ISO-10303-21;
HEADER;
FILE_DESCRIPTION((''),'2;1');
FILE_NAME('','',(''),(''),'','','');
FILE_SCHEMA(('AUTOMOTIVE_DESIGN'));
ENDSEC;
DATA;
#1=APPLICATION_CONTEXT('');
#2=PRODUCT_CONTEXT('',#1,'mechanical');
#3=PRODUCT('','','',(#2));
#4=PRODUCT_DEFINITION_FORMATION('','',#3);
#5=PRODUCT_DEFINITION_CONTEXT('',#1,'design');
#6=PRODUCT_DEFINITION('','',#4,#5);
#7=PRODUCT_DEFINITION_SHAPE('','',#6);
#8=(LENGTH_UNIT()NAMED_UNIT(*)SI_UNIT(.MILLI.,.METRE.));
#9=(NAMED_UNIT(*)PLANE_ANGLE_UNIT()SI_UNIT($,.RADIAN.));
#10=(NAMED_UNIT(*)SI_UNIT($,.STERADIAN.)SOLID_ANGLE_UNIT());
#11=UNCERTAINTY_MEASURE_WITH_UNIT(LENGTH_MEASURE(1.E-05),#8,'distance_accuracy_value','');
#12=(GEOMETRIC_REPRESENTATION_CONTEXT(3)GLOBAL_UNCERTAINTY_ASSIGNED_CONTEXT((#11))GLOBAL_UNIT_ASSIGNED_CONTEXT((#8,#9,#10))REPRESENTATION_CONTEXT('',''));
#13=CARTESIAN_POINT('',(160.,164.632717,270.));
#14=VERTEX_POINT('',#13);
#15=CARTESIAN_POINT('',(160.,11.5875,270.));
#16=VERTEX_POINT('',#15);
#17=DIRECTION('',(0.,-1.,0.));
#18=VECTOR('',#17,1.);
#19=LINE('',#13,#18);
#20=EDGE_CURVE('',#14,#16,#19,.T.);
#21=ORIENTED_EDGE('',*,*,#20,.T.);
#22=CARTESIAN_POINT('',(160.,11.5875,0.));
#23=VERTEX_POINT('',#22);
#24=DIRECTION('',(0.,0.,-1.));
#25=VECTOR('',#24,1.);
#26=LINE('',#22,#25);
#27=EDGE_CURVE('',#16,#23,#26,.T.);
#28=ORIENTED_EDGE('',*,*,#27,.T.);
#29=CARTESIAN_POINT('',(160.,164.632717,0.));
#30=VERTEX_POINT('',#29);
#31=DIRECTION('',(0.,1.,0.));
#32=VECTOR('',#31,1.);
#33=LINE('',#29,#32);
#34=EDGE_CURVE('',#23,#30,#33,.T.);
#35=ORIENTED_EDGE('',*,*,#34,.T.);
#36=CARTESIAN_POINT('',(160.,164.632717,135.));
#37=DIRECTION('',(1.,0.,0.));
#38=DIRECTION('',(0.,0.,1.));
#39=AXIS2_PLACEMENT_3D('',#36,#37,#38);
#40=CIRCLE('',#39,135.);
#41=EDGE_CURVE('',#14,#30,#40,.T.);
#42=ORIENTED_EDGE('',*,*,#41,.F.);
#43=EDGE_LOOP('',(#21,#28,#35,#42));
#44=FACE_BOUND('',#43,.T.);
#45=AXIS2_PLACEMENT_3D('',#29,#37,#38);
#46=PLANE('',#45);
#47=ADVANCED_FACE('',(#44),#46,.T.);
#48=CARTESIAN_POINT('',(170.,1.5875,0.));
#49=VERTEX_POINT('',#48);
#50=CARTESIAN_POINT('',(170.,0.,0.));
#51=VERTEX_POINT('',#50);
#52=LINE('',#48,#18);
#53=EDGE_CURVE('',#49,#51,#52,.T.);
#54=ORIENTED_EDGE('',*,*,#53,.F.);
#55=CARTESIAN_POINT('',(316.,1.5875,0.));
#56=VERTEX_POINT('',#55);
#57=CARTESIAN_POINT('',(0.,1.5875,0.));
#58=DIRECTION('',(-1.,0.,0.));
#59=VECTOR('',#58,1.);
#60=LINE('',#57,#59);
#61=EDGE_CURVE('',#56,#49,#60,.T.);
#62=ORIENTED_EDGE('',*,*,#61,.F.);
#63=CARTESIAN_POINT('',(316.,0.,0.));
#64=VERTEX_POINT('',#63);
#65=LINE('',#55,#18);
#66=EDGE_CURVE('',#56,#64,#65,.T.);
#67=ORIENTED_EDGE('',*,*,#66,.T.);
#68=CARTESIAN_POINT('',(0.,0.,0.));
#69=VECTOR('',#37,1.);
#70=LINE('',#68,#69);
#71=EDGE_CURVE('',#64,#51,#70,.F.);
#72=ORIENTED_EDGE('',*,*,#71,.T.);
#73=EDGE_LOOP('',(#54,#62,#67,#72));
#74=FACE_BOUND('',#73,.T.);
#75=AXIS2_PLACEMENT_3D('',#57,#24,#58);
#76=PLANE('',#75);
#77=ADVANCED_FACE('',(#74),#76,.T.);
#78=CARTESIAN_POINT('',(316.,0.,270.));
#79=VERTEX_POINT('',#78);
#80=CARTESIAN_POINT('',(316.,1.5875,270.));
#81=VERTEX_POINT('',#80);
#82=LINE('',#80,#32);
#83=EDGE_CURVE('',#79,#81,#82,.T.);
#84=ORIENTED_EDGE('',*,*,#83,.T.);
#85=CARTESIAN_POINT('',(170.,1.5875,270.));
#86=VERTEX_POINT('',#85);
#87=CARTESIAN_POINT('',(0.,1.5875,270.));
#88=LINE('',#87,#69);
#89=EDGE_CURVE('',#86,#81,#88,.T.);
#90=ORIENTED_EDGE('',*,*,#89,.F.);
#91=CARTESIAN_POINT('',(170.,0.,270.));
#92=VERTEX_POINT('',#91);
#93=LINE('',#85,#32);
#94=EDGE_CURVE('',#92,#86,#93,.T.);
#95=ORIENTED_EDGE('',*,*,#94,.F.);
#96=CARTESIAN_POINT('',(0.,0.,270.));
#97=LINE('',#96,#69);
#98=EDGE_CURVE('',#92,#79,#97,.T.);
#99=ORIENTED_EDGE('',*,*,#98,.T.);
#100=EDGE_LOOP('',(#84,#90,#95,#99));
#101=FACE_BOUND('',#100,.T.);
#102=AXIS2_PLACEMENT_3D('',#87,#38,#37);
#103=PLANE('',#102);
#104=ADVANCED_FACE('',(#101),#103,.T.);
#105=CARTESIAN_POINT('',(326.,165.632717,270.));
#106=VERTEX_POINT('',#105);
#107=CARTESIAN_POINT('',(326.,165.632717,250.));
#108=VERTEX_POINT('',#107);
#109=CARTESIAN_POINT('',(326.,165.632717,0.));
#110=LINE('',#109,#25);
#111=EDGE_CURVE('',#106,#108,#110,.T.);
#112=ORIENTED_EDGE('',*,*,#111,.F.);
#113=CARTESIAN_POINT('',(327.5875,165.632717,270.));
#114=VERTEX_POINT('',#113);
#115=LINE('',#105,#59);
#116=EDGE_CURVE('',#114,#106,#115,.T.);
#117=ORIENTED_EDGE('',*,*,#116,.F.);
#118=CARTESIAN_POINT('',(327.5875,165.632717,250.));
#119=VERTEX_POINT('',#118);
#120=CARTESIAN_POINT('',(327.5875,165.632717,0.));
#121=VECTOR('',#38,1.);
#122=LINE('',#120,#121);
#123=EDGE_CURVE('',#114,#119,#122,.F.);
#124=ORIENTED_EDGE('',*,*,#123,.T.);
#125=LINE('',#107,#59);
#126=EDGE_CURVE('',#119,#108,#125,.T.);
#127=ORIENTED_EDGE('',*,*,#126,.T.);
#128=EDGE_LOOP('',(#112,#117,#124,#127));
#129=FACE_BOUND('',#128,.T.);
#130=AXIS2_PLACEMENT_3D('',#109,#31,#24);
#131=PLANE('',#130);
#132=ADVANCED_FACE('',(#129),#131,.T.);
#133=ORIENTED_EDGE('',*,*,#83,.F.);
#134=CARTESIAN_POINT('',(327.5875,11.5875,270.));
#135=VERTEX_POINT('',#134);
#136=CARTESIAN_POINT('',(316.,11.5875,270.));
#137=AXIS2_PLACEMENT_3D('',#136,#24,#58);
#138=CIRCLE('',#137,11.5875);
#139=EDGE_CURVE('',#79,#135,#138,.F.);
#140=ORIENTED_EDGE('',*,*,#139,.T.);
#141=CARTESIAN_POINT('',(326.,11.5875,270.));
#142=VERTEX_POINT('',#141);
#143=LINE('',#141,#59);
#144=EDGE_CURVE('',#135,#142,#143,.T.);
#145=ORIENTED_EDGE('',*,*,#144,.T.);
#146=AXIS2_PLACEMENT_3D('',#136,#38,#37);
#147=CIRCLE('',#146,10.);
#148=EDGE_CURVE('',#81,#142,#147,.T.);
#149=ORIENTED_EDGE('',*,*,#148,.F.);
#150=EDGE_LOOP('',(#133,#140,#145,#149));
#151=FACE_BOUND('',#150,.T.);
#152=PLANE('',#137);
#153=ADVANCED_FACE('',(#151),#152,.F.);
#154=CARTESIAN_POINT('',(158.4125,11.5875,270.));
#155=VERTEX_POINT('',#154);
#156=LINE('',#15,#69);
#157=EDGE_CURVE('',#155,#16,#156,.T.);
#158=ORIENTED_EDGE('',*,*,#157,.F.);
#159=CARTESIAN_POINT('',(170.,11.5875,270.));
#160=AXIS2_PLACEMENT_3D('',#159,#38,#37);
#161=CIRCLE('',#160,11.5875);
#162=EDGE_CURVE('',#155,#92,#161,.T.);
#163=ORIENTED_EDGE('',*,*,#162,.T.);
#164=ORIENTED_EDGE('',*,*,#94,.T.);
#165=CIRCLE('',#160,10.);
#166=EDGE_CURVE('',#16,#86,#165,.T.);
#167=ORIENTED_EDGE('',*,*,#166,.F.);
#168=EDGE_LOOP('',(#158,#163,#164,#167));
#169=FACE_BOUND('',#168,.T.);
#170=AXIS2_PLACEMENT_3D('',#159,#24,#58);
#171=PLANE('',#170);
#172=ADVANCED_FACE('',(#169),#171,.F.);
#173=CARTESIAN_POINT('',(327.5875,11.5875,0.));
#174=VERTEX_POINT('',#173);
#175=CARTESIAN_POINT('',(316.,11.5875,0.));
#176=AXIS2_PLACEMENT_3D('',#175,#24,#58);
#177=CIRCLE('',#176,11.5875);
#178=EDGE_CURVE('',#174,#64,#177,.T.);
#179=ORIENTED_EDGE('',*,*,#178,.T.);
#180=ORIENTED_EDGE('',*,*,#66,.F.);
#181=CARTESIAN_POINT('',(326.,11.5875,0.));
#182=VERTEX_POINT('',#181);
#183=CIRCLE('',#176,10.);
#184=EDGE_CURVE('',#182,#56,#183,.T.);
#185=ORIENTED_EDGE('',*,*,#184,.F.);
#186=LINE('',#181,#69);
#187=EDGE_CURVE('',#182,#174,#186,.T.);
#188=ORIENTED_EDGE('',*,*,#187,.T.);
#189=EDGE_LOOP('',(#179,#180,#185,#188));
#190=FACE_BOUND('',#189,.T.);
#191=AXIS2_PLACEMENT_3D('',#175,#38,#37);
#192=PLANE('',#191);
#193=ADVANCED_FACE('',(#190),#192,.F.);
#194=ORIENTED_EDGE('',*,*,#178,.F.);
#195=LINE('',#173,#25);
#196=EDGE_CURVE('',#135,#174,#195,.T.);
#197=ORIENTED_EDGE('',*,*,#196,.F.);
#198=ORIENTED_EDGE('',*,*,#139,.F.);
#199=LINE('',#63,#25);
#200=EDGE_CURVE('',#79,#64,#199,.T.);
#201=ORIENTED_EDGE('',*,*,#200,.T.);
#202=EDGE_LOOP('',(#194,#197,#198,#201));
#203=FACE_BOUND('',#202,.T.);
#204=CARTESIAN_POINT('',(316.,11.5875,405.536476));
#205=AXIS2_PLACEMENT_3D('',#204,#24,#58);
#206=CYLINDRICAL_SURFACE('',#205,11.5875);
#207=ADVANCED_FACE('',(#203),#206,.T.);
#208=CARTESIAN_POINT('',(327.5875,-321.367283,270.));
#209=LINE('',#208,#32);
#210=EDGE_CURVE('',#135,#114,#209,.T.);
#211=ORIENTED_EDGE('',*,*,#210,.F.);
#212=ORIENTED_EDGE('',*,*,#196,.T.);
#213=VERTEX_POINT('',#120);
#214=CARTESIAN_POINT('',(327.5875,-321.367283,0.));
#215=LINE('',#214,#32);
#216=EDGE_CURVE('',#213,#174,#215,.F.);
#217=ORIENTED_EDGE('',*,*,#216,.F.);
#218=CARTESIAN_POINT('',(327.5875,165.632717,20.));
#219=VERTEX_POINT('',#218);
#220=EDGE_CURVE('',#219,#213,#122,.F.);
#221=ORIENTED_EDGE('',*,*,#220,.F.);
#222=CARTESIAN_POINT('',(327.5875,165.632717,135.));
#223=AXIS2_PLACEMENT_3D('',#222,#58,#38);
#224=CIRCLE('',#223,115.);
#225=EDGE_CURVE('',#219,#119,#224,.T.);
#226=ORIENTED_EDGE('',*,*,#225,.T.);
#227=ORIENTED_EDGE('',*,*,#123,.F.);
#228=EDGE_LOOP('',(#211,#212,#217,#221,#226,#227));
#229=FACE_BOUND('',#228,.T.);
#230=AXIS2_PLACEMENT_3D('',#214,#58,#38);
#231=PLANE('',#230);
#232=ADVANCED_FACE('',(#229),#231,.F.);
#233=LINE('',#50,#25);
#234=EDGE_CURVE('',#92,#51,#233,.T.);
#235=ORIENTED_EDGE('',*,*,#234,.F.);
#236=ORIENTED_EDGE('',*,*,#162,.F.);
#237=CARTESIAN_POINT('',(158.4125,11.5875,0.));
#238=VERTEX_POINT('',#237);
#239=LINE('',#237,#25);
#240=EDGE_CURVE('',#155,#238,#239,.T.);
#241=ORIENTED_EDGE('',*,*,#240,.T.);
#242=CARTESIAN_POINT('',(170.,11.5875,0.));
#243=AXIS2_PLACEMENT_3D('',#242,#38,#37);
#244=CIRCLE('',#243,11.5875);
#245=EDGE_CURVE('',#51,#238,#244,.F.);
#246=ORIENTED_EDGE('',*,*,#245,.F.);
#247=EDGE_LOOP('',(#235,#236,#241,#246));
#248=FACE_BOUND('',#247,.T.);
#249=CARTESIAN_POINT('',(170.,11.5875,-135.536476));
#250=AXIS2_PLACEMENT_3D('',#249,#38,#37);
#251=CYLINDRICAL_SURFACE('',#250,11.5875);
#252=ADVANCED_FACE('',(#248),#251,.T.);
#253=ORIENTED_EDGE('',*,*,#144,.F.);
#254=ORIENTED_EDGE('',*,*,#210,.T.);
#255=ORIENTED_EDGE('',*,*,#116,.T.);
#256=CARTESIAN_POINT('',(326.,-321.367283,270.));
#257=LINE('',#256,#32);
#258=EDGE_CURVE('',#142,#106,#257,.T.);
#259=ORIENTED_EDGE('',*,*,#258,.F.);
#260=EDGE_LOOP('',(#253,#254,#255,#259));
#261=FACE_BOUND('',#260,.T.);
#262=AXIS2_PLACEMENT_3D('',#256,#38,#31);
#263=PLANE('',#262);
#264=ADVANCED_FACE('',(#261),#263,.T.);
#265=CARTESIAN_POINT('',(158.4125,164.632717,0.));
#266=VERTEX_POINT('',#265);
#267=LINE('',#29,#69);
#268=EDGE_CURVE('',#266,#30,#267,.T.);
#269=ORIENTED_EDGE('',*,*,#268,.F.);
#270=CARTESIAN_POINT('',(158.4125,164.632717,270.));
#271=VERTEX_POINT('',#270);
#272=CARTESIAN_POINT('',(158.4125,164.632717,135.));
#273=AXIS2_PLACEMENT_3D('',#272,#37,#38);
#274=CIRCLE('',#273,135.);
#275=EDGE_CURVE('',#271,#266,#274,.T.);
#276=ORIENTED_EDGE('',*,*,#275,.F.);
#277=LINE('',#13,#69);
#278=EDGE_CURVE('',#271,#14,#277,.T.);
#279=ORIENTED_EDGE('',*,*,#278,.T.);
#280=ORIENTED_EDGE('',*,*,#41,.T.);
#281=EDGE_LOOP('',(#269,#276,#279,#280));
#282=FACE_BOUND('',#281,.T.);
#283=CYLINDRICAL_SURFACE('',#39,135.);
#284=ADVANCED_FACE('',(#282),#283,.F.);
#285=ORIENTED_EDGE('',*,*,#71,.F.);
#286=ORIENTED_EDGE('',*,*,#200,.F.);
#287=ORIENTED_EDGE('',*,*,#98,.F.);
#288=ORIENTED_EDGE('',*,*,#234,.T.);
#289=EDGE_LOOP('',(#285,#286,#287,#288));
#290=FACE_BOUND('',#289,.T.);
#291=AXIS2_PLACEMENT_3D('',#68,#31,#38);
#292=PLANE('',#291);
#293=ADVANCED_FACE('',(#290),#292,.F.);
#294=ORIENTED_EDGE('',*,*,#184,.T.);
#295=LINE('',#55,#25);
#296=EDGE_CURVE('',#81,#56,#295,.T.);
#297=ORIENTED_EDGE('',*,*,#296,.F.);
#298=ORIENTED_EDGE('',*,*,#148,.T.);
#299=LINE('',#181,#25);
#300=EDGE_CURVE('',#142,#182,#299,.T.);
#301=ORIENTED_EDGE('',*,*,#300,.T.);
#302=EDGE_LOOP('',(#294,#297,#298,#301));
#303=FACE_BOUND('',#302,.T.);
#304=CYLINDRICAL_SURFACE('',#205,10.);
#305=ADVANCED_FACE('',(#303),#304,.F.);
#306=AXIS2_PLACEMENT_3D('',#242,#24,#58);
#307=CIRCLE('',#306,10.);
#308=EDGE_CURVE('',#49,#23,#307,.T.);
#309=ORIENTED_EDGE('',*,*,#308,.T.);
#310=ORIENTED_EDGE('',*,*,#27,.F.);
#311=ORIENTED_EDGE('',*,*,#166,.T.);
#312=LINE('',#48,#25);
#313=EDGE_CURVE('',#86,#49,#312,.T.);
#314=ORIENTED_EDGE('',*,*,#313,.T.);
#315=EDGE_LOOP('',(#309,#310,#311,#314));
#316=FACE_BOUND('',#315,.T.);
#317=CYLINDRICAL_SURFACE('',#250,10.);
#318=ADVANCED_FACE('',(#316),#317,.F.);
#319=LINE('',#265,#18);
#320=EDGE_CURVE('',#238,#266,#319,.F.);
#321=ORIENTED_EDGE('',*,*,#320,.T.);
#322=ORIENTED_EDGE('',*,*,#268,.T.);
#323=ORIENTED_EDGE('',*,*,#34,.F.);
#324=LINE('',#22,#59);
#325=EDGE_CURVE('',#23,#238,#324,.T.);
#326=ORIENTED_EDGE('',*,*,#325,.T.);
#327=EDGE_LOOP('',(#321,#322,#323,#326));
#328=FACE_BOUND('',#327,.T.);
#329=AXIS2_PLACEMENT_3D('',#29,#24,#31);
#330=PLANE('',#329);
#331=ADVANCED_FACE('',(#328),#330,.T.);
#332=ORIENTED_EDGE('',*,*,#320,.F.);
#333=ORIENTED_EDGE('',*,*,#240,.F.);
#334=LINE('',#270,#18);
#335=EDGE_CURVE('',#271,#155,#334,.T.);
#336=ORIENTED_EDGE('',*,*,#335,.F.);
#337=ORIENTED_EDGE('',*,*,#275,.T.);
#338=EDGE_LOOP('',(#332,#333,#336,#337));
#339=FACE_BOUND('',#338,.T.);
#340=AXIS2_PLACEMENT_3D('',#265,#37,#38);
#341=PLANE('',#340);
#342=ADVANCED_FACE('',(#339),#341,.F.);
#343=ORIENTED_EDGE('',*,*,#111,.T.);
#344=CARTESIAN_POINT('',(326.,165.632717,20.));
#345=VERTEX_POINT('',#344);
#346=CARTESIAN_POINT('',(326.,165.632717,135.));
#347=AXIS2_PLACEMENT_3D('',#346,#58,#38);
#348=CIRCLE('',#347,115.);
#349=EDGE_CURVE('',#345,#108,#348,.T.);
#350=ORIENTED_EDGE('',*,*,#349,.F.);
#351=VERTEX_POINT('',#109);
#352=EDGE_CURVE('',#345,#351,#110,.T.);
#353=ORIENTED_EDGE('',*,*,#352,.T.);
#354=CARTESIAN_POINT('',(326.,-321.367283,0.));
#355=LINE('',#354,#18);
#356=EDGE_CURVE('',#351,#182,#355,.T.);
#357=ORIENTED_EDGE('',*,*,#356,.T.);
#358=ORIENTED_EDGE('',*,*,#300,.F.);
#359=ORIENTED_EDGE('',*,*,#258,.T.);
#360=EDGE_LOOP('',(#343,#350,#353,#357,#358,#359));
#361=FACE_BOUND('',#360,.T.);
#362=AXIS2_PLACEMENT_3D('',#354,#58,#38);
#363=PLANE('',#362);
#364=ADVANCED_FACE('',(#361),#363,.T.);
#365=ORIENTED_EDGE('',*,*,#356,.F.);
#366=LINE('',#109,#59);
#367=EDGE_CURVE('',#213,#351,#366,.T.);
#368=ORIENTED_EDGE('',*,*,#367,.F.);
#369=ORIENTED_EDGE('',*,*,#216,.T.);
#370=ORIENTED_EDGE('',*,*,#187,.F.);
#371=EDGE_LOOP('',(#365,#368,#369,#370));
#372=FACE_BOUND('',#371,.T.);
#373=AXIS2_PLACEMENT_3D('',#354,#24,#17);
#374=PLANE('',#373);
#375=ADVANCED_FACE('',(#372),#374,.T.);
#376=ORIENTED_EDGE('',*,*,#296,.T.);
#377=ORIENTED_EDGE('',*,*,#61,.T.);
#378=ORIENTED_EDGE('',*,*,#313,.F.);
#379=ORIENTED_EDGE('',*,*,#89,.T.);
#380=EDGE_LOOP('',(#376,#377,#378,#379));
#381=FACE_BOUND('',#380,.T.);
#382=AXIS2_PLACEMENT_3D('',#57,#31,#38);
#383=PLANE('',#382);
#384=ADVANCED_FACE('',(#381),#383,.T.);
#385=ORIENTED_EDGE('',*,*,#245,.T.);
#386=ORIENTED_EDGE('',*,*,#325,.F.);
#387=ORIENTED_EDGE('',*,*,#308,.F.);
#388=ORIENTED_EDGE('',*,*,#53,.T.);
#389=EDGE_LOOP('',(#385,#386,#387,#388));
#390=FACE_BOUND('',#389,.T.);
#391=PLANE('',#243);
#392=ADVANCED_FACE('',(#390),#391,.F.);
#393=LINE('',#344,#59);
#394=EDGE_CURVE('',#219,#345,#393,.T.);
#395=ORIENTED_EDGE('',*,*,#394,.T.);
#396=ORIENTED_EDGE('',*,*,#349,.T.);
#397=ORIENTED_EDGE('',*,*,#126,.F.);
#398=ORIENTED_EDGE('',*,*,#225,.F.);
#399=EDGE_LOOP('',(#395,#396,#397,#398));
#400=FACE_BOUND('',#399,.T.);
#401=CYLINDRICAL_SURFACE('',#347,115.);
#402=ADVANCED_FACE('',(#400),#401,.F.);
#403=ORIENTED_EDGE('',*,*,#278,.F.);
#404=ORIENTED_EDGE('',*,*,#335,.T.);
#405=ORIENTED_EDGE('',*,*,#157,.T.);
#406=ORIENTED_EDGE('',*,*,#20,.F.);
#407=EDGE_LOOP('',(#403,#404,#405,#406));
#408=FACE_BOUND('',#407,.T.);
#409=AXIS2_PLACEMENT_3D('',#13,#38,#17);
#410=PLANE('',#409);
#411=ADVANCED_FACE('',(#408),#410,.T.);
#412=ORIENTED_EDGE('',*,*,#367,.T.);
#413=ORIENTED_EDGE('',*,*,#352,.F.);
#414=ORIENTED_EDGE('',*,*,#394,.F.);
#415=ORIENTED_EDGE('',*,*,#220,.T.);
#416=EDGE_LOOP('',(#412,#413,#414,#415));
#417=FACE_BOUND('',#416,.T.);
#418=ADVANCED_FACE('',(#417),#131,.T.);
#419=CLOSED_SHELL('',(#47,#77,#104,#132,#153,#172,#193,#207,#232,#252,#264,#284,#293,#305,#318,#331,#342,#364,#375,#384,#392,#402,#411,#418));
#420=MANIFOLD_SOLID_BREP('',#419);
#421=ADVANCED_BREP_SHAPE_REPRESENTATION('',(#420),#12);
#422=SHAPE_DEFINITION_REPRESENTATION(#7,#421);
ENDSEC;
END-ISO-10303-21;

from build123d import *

# Parameters (mm, degrees)
SKETCH1_W                  = 487
SKETCH1_H                  = 270
BOSS_EXTRUDE1_DEPTH        = 1.5875
SKETCH2_R                  = 135
SKETCH2_R_2                = 115
CUT_EXTRUDE1_DEPTH         = 557.840659575
SKETCHED_BEND2_DEPTH       = 270
SKETCHED_BEND2_2_DEPTH     = 270
SKETCHED_START             = -1
SKETCHED_BEND2_3_OUTLINE_W = 1.5875
SKETCHED_BEND2_3_OUTLINE_H = 270
SKETCHED_BEND2_3_DEPTH     = 161
SKETCHED_START_2           = 326
SKETCHED_BEND2_4_DEPTH     = 1.5875
SKETCHED_START_3           = 158.4125
SKETCHED_BEND2_5_DEPTH     = 11.5875
SKETCHED_BEND2_6_DEPTH     = 270


with BuildPart() as part:
    # Sketch1 → Boss-Extrude1 (new body)
    with BuildSketch(Plane(origin=(0, 0, 0), x_dir=(1, 0, 0), z_dir=(0, 1, 0))):
        with Locations((243.5, -135)):
            Rectangle(SKETCH1_W, SKETCH1_H)
    extrude(amount=BOSS_EXTRUDE1_DEPTH)

    # Sketch2 → Cut-Extrude1 (cut, through all)
    with BuildSketch(Plane(origin=(0, 1.5875, 0), x_dir=(1, 0, 0), z_dir=(0, 1, 0))):
        with Locations((0, -135)):
            Circle(SKETCH2_R)
        with Locations((487, -135)):
            Circle(SKETCH2_R_2)
    extrude(amount=-CUT_EXTRUDE1_DEPTH, mode=Mode.SUBTRACT)

    # Sketched Bend2: read off the stored shape, not the designer's step
    # Sketched Bend2 outline → Sketched Bend2 (cut)
    with BuildSketch(Plane.XY):
        with BuildLine():
            ThreePointArc((321.854071767, 1.5875), (319.032750917, 0.403914791), (316, 0))
            Line((316, 0), (487, 0))
            Line((487, 0), (487, 1.5875))
            Line((487, 1.5875), (321.854071767, 1.5875))
        make_face()
    extrude(amount=SKETCHED_BEND2_DEPTH, mode=Mode.SUBTRACT)

    # Sketched Bend2 2 outline → Sketched Bend2 2 (add)
    with BuildSketch(Plane.XY):
        with BuildLine():
            ThreePointArc((326, 11.5875), (323.071067812, 4.516432188), (316, 1.5875))
            Line((316, 1.5875), (321.854071767, 1.5875))
            ThreePointArc((321.854071767, 1.5875), (326.052467678, 5.8239898), (327.5875, 11.5875))
            Line((327.5875, 11.5875), (327.5875, 165.632717148))
            Line((327.5875, 165.632717148), (326, 165.632717148))
            Line((326, 165.632717148), (326, 11.5875))
        make_face()
    extrude(amount=SKETCHED_BEND2_2_DEPTH)

    # Sketched Bend2 3 outline → Sketched Bend2 3 (cut)
    with BuildSketch(Plane.YZ.offset(SKETCHED_START)):
        with Locations((0.79375, 135)):
            Rectangle(SKETCHED_BEND2_3_OUTLINE_W, SKETCHED_BEND2_3_OUTLINE_H)
    extrude(amount=SKETCHED_BEND2_3_DEPTH, mode=Mode.SUBTRACT)

    # Sketched Bend2 4 outline → Sketched Bend2 4 (cut)
    with BuildSketch(Plane.YZ.offset(SKETCHED_START_2)):
        with BuildLine():
            ThreePointArc((165.632717148, 250), (50.632717148, 135), (165.632717148, 20))
            Line((165.632717148, 20), (165.632717148, 250))
        make_face()
    extrude(amount=SKETCHED_BEND2_4_DEPTH, mode=Mode.SUBTRACT)

    # Sketched Bend2 5 outline → Sketched Bend2 5 (add)
    with BuildSketch(Plane.YZ.offset(SKETCHED_START_3)):
        with BuildLine():
            Line((164.632717148, 270), (1.5875, 270))
            Line((1.5875, 270), (1.5875, 0))
            Line((1.5875, 0), (164.632717148, 0))
            ThreePointArc((164.632717148, 0), (29.632717148, 135), (164.632717148, 270))
        make_face()
    extrude(amount=SKETCHED_BEND2_5_DEPTH)

    # Sketched Bend2 6 outline → Sketched Bend2 6 (cut)
    with BuildSketch(Plane.XY):
        with BuildLine():
            Line((160, 167), (160, 11.5875))
            ThreePointArc((160, 11.5875), (162.928932188, 4.516432188), (170, 1.5875))
            Line((170, 1.5875), (170, 167))
            Line((170, 167), (160, 167))
        make_face()
        with BuildLine():
            Line((329, -2), (329, 0))
            Line((329, 0), (170, 0))
            ThreePointArc((170, 0), (161.806400173, 3.393900173), (158.4125, 11.5875))
            Line((158.4125, 11.5875), (158.4125, 1.5875))
            Line((158.4125, 1.5875), (160, 1.5875))
            Line((160, 1.5875), (160, -2))
            Line((160, -2), (329, -2))
        make_face()
    extrude(amount=SKETCHED_BEND2_6_DEPTH, mode=Mode.SUBTRACT)


solid = part.part
